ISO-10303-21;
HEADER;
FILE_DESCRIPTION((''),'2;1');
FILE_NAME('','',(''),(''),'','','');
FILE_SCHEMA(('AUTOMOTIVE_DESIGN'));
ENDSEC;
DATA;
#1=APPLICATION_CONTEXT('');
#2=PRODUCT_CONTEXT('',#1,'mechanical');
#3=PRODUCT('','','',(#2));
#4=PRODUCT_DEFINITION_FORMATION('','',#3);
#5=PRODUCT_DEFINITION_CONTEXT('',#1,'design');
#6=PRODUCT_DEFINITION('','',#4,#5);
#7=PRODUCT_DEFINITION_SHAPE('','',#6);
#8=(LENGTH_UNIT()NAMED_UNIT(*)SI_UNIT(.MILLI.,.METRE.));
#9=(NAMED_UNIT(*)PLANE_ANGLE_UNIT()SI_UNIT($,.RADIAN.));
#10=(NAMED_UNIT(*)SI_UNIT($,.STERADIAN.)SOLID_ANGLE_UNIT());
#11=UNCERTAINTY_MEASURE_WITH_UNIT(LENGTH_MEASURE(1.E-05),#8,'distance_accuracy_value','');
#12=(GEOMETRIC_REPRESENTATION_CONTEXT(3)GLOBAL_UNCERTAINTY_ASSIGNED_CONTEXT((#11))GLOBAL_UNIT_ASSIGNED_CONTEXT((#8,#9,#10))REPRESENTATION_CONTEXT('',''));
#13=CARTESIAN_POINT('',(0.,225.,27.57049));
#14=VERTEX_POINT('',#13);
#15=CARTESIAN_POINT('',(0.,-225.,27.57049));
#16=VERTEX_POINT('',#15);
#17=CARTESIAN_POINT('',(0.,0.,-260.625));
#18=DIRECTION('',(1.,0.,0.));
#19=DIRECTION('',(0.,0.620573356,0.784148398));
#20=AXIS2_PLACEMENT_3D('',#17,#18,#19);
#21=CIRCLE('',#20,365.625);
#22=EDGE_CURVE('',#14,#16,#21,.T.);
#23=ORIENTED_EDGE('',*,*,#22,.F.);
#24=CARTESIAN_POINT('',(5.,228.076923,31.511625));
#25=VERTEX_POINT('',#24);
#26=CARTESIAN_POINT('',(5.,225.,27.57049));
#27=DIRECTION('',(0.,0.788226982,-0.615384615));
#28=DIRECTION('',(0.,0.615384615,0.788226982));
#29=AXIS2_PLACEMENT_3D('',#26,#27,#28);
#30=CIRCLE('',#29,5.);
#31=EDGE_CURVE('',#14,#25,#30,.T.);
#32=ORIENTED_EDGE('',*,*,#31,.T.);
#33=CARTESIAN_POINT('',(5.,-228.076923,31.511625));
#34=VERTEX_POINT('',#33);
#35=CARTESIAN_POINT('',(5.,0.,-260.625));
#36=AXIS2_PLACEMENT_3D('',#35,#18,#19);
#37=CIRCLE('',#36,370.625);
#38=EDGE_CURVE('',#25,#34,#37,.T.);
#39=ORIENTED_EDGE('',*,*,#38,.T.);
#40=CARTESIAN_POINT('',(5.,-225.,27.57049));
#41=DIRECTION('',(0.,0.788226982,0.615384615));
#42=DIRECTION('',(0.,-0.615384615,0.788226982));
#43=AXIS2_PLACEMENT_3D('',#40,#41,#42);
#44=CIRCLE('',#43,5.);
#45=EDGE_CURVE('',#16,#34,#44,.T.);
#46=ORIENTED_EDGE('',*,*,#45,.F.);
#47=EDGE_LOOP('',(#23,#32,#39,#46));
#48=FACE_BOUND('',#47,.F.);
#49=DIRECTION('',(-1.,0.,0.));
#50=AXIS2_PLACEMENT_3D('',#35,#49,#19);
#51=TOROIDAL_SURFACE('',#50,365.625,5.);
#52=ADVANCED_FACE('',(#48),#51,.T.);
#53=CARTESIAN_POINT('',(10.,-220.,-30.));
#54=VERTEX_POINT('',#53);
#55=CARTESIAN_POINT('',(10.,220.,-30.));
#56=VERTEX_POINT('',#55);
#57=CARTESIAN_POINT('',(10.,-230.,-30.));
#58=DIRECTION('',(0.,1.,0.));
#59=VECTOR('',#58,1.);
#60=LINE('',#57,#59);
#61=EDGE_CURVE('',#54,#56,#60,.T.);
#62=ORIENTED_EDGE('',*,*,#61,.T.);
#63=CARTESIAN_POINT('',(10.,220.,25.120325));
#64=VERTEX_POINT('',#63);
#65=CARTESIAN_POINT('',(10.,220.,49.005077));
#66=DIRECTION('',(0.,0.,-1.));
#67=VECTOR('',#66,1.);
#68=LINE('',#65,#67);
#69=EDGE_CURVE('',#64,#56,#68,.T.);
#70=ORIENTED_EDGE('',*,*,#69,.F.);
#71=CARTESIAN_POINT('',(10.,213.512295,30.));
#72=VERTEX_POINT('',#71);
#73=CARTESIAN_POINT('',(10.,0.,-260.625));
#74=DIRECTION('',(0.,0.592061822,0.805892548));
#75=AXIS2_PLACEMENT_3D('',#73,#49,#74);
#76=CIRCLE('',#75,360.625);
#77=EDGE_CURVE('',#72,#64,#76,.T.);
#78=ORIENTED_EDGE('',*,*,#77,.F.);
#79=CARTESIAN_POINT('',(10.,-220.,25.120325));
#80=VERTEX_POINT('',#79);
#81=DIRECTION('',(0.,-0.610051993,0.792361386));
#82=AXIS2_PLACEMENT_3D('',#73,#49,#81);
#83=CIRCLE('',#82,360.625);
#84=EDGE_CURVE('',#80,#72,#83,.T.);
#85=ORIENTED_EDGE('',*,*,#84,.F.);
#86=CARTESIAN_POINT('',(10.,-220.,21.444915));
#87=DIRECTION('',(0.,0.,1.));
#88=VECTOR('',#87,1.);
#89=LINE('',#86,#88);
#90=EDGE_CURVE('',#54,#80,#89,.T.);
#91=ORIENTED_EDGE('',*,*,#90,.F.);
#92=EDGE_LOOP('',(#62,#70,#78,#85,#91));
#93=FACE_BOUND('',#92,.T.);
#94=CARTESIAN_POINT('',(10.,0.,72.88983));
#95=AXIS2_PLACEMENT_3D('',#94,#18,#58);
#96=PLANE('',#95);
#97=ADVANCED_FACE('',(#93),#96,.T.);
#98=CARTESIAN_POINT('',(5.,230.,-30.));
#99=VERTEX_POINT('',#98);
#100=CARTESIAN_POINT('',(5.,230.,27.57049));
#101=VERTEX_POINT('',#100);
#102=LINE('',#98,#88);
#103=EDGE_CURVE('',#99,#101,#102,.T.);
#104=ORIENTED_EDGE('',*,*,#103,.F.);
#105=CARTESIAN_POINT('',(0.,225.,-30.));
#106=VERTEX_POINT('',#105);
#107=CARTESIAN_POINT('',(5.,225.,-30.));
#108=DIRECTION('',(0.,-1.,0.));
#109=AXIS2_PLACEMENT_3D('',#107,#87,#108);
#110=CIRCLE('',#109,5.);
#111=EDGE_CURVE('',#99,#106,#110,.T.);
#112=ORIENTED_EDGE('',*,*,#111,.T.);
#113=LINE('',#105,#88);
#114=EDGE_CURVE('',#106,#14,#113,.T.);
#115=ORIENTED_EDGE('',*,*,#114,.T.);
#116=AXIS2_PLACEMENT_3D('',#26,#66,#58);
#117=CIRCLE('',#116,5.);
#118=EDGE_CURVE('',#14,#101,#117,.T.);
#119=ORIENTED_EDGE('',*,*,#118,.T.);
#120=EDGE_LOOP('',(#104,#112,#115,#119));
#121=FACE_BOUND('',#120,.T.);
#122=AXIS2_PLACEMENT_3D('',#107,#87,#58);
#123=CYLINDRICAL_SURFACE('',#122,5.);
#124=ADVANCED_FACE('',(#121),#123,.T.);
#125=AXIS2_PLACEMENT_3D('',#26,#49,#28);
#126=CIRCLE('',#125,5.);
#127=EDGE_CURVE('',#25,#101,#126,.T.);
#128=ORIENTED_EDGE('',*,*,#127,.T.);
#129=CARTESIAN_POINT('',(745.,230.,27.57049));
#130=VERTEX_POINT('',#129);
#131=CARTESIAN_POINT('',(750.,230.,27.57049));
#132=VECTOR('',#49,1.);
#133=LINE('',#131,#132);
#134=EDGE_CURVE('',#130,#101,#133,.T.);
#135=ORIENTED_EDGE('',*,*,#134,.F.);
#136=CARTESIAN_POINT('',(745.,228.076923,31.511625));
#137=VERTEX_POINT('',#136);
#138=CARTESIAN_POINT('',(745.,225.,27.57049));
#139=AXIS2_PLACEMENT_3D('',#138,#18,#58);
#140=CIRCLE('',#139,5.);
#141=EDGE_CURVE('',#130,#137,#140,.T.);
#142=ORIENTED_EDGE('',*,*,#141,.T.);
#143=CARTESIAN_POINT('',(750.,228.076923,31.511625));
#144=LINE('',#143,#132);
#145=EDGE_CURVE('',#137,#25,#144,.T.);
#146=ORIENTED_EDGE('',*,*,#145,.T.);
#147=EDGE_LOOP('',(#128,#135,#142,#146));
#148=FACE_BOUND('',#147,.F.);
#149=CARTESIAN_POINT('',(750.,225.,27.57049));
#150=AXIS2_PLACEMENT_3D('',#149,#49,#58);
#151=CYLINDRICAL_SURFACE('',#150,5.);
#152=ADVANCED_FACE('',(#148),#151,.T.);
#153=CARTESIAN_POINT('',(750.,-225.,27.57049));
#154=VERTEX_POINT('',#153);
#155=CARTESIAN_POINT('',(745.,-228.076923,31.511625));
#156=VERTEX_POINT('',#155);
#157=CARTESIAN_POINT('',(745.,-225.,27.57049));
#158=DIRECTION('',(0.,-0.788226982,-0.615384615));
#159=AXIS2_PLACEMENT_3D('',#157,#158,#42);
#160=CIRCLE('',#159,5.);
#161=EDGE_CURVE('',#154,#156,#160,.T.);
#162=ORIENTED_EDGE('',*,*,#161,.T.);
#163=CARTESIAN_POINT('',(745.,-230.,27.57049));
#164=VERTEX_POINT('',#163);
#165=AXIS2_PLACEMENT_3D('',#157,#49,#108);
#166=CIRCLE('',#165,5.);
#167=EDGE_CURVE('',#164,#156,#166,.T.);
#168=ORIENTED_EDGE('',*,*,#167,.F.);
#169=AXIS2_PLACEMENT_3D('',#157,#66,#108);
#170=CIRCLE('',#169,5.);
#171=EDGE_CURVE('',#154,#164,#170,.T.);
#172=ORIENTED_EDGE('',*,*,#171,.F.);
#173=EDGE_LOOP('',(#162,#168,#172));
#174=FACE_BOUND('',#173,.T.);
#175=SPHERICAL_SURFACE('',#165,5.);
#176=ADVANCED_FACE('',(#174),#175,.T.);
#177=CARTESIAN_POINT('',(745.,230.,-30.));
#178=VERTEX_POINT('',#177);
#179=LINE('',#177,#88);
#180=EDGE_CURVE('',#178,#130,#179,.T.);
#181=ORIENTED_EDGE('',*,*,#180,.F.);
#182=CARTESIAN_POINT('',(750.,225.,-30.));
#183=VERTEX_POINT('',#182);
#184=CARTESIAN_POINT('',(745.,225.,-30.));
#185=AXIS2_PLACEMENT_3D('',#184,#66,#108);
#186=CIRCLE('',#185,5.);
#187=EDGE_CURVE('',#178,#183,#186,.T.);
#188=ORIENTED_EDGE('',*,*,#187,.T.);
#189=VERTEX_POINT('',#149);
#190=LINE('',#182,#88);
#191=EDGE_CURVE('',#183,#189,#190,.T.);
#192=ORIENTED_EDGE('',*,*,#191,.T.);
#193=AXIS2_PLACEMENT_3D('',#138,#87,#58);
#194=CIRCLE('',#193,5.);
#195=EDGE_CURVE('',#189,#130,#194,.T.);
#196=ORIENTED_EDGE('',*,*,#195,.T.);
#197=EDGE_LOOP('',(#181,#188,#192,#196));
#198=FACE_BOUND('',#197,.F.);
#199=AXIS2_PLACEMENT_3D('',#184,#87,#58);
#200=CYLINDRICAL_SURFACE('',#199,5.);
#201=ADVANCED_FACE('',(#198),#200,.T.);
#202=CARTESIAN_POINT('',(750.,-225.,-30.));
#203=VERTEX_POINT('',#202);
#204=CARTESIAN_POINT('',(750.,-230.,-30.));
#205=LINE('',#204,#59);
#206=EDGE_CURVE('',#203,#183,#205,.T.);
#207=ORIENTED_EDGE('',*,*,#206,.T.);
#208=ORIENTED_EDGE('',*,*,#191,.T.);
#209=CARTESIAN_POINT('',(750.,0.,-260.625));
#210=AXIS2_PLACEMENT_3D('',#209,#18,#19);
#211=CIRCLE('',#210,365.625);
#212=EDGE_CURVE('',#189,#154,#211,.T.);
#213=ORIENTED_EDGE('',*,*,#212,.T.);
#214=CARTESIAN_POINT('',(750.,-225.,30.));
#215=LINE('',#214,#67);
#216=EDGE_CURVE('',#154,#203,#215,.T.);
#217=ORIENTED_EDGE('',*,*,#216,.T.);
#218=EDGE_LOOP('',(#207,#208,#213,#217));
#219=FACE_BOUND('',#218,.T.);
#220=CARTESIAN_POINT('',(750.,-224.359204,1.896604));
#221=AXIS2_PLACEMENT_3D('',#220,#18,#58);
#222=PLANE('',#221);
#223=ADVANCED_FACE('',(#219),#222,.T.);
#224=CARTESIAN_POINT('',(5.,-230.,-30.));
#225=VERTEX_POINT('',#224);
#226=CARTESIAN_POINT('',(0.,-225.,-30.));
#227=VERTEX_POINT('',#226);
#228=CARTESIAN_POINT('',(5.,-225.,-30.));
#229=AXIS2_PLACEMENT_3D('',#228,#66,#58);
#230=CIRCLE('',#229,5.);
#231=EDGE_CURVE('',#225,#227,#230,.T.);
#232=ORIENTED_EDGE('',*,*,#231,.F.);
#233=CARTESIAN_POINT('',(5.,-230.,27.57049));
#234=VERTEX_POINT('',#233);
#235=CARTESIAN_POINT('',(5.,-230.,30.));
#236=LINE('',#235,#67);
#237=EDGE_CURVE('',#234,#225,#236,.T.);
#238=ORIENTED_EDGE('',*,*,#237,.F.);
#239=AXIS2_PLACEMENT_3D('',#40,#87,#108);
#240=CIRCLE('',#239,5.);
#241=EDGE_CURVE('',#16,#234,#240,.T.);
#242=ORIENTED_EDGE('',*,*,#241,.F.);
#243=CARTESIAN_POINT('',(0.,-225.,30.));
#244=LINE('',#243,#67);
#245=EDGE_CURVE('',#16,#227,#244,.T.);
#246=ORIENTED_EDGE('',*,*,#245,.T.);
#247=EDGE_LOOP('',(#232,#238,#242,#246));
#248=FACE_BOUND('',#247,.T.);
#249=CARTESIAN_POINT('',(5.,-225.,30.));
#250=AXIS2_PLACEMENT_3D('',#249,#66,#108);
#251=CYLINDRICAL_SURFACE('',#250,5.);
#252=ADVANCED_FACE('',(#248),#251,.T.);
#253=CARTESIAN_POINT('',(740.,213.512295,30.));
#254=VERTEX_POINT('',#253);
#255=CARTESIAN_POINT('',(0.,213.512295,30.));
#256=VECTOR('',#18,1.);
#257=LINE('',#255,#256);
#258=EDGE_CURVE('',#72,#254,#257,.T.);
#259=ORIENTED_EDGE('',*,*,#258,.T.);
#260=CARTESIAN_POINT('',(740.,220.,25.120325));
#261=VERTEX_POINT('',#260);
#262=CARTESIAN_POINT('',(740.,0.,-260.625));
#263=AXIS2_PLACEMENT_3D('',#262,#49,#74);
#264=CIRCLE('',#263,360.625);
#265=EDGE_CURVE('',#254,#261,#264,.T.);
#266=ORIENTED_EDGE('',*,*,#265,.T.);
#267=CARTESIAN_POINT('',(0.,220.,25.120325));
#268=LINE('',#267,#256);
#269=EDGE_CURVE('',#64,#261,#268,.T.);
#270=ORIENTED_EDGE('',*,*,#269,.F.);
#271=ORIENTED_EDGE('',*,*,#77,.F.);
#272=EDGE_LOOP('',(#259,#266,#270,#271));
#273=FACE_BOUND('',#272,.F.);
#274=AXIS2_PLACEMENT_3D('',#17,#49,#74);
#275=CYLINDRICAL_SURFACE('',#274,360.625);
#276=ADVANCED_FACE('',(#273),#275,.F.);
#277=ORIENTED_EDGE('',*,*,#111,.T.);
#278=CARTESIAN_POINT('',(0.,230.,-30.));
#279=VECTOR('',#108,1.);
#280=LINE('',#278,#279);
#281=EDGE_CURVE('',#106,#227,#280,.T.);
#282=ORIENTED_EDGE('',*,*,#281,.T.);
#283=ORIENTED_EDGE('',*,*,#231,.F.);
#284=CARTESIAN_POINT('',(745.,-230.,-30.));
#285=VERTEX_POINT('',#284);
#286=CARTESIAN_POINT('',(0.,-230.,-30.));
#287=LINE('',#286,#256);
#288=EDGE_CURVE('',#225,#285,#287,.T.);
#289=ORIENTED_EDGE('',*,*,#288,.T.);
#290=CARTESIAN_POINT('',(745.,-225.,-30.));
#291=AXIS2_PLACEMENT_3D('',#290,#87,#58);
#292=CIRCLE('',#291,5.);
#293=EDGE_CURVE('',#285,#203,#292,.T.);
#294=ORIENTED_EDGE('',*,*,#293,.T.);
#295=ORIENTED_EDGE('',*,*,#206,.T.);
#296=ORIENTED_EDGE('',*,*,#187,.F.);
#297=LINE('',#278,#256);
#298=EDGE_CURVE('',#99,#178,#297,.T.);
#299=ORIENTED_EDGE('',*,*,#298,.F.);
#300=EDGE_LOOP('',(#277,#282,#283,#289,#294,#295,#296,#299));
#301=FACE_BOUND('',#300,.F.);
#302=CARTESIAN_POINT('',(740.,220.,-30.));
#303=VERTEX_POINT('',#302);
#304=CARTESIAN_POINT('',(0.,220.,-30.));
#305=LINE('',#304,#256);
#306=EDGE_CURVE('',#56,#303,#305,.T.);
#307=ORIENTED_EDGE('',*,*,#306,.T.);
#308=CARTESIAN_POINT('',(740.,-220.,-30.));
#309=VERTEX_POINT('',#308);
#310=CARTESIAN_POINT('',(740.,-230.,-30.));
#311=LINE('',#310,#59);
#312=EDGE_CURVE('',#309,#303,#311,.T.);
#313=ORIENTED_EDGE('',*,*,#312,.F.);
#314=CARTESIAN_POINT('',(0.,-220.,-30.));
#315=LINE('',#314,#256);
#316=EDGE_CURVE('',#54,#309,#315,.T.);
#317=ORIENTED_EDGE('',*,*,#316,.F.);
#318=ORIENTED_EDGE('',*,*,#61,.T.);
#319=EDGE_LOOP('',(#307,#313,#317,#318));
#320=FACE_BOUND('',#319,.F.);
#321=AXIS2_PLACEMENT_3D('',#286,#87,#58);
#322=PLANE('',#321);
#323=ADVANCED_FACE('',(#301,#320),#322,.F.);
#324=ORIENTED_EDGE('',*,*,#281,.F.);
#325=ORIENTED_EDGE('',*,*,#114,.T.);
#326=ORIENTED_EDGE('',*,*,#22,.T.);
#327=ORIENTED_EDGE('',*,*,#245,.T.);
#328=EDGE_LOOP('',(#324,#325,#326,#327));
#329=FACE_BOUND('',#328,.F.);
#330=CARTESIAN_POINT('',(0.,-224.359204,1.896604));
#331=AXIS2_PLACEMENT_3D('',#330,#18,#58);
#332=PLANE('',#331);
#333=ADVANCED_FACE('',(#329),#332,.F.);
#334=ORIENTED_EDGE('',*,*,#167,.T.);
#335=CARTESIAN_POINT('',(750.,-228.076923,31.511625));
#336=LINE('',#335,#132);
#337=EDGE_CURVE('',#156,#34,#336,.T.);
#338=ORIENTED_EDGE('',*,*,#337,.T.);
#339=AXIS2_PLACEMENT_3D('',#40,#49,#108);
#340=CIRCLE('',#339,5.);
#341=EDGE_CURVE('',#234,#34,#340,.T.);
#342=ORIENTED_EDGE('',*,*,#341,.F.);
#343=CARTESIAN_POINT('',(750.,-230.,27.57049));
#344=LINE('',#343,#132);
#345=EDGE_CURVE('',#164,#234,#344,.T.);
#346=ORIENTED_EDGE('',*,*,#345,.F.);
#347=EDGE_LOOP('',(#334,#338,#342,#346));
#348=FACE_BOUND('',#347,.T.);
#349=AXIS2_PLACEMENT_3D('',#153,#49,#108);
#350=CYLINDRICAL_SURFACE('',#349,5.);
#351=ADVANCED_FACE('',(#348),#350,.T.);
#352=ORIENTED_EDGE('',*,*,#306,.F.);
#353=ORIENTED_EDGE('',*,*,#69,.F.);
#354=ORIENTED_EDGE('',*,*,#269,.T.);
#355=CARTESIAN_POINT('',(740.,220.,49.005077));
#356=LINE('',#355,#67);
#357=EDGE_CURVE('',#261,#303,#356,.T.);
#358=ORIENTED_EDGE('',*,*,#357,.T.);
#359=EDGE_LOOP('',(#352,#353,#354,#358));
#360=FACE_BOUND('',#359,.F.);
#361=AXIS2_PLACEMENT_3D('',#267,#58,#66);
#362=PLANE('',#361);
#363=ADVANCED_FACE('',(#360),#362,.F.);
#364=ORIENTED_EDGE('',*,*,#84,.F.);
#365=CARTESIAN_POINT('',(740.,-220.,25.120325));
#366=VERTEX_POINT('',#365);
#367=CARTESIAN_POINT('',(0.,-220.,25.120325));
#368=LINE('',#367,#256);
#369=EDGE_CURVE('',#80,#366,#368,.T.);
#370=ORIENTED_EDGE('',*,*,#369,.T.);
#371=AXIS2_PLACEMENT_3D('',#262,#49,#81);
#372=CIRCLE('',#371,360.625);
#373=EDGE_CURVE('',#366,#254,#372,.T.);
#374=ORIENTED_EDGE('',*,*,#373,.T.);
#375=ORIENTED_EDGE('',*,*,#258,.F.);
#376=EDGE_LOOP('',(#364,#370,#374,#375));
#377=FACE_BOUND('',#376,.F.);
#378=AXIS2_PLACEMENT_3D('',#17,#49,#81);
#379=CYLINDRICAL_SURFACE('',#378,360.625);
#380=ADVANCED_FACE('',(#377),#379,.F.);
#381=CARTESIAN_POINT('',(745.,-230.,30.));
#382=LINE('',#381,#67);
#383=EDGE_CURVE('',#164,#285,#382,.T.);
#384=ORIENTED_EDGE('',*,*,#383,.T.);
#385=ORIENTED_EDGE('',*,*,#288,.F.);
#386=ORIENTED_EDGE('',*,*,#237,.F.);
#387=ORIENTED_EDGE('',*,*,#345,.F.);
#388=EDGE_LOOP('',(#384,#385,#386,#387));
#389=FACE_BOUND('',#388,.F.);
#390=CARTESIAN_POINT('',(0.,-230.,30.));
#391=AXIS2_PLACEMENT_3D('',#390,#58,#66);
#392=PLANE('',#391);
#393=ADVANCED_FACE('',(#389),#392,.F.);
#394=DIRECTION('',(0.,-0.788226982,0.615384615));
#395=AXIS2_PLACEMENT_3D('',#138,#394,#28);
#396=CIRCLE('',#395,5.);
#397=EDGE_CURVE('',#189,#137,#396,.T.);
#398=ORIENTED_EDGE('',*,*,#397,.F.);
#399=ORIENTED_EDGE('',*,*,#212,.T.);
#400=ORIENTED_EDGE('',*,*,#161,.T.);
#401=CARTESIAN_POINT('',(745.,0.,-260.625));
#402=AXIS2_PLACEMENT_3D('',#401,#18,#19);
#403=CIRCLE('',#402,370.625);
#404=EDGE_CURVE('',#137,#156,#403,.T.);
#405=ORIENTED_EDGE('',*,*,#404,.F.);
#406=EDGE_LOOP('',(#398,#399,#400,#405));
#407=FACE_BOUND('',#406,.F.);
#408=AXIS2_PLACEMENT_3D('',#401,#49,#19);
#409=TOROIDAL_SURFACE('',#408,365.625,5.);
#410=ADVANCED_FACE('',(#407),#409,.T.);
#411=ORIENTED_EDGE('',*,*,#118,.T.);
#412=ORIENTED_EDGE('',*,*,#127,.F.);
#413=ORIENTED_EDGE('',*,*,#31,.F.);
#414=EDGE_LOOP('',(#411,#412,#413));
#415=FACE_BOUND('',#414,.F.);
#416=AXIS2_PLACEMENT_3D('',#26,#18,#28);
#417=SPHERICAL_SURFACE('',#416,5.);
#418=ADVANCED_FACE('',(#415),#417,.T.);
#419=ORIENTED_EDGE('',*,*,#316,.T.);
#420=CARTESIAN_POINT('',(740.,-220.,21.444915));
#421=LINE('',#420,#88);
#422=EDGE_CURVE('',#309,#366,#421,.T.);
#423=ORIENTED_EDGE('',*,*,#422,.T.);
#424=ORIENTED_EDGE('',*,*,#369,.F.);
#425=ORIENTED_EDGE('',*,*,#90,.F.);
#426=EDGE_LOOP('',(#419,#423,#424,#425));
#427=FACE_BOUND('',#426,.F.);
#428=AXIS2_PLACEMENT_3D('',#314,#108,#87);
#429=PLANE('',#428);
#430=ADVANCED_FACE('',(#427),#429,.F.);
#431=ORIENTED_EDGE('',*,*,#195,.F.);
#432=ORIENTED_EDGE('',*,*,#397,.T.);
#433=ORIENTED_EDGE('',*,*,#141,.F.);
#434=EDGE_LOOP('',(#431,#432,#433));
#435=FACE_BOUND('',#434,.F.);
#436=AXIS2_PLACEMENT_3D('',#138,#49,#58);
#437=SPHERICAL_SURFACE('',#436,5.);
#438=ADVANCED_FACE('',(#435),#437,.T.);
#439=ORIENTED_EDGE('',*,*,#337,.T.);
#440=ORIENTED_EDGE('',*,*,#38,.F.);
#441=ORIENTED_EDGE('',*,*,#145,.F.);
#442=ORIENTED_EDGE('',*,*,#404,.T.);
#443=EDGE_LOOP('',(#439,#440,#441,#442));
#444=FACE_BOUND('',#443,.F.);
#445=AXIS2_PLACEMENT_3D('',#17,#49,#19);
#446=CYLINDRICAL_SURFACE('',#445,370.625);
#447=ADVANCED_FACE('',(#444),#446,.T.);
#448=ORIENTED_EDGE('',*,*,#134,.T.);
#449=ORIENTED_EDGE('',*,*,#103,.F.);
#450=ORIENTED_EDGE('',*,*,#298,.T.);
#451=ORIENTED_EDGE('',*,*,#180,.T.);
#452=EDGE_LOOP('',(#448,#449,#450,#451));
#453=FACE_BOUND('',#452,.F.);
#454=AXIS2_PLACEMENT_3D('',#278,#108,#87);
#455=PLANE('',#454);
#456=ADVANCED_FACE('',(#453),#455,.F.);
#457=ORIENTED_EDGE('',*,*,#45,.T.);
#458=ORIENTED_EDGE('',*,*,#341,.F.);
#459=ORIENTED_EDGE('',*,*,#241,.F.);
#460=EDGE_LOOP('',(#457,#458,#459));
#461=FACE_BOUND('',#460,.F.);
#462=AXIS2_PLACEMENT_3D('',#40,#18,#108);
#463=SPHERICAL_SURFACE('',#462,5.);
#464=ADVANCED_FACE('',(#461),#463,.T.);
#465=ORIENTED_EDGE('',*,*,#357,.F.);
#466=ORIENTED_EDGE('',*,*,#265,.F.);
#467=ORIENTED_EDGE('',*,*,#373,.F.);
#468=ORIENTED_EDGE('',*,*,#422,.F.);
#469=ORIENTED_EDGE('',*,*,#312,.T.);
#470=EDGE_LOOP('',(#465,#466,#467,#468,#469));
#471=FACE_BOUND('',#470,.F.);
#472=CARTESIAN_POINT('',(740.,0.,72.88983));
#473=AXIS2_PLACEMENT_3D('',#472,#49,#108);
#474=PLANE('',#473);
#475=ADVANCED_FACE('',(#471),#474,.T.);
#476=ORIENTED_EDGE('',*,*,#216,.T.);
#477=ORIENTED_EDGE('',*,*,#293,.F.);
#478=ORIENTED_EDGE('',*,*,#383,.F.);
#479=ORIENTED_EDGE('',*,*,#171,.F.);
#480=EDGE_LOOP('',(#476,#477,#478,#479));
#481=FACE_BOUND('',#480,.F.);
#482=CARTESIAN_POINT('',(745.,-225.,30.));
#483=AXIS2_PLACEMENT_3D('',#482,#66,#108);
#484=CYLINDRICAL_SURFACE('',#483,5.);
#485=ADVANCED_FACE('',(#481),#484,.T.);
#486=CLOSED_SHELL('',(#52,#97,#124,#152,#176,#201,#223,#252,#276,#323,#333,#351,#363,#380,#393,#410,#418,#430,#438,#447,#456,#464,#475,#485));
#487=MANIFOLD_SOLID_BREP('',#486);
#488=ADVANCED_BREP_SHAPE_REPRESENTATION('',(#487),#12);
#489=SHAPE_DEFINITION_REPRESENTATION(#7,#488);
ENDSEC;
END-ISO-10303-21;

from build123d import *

# Parameters (mm, degrees)
F1_DEPTH = 750
F2_DEPTH = 10
F6_R     = 5


# Not quite as in the source:
# - a feature of the source that left no trace in its solid (it failed there, or was rolled back) is left out


with BuildPart() as f1:
    # F0 (on Right) → F1 (new body)
    with BuildSketch(Plane.YZ):
        with BuildLine():
            Line((-213.512294728, 30), (-230, 30))
            Line((-230, 30), (-230, -30))
            Line((-230, -30), (-220, -30))
            Line((-220, -30), (-220, 25.1203247649))
            ThreePointArc((-220, 25.1203247649), (-216.7698785064, 27.5784184345), (-213.512294728, 30))
        make_face()
        with BuildLine():
            ThreePointArc((230, 30), (0, 110), (-230, 30))
            Line((-230, 30), (-213.512294728, 30))
            ThreePointArc((-213.512294728, 30), (0, 100), (213.512294728, 30))
            Line((213.512294728, 30), (230, 30))
        make_face()
        with BuildLine():
            Line((230, -30), (230, 30))
            Line((230, 30), (213.512294728, 30))
            ThreePointArc((213.512294728, 30), (216.7698785064, 27.5784184345), (220, 25.1203247649))
            Line((220, 25.1203247649), (220, -30))
            Line((220, -30), (230, -30))
        make_face()
    extrude(amount=F1_DEPTH)

    # F0 (on Right) → F2 (join)
    with BuildSketch(Plane.YZ):
        with BuildLine():
            ThreePointArc((230, 30), (0, 110), (-230, 30))
            Line((-230, 30), (-213.512294728, 30))
            ThreePointArc((-213.512294728, 30), (0, 100), (213.512294728, 30))
            Line((213.512294728, 30), (230, 30))
        make_face()
        with BuildLine():
            Line((-213.512294728, 30), (-230, 30))
            Line((-230, 30), (-230, -30))
            Line((-230, -30), (-220, -30))
            Line((-220, -30), (-220, 25.1203247649))
            ThreePointArc((-220, 25.1203247649), (-216.7698785064, 27.5784184345), (-213.512294728, 30))
        make_face()
        with BuildLine():
            Line((213.512294728, 30), (-213.512294728, 30))
            ThreePointArc((-213.512294728, 30), (-216.7698785064, 27.5784184345), (-220, 25.1203247649))
            Line((-220, 25.1203247649), (-220, -30))
            Line((-220, -30), (220, -30))
            Line((220, -30), (220, 25.1203247649))
            ThreePointArc((220, 25.1203247649), (216.7698785064, 27.5784184345), (213.512294728, 30))
        make_face()
        with BuildLine():
            ThreePointArc((213.512294728, 30), (0, 100), (-213.512294728, 30))
            Line((-213.512294728, 30), (213.512294728, 30))
        make_face()
        with BuildLine():
            Line((230, -30), (230, 30))
            Line((230, 30), (213.512294728, 30))
            ThreePointArc((213.512294728, 30), (216.7698785064, 27.5784184345), (220, 25.1203247649))
            Line((220, 25.1203247649), (220, -30))
            Line((220, -30), (230, -30))
        make_face()
    extrude(amount=F2_DEPTH)

    # F4: F1 across plane


with BuildPart() as f1_1:
    add(f1.part)
    add(f1.part.mirror(Plane.YZ.offset(375)))

    # F6
    f6_edges = [f1_1.edges().sort_by_distance(p)[0] for p in [
        (750, 0, 110),
        (375, 230, 30),
        (0, 0, 110),
        (375, -230, 30),
        (0, -230, 0),
        (750, -230, 0),
        (0, 230, 0),
        (750, 230, 0),
    ]]
    fillet(f6_edges, radius=F6_R)


solid = f1_1.part
